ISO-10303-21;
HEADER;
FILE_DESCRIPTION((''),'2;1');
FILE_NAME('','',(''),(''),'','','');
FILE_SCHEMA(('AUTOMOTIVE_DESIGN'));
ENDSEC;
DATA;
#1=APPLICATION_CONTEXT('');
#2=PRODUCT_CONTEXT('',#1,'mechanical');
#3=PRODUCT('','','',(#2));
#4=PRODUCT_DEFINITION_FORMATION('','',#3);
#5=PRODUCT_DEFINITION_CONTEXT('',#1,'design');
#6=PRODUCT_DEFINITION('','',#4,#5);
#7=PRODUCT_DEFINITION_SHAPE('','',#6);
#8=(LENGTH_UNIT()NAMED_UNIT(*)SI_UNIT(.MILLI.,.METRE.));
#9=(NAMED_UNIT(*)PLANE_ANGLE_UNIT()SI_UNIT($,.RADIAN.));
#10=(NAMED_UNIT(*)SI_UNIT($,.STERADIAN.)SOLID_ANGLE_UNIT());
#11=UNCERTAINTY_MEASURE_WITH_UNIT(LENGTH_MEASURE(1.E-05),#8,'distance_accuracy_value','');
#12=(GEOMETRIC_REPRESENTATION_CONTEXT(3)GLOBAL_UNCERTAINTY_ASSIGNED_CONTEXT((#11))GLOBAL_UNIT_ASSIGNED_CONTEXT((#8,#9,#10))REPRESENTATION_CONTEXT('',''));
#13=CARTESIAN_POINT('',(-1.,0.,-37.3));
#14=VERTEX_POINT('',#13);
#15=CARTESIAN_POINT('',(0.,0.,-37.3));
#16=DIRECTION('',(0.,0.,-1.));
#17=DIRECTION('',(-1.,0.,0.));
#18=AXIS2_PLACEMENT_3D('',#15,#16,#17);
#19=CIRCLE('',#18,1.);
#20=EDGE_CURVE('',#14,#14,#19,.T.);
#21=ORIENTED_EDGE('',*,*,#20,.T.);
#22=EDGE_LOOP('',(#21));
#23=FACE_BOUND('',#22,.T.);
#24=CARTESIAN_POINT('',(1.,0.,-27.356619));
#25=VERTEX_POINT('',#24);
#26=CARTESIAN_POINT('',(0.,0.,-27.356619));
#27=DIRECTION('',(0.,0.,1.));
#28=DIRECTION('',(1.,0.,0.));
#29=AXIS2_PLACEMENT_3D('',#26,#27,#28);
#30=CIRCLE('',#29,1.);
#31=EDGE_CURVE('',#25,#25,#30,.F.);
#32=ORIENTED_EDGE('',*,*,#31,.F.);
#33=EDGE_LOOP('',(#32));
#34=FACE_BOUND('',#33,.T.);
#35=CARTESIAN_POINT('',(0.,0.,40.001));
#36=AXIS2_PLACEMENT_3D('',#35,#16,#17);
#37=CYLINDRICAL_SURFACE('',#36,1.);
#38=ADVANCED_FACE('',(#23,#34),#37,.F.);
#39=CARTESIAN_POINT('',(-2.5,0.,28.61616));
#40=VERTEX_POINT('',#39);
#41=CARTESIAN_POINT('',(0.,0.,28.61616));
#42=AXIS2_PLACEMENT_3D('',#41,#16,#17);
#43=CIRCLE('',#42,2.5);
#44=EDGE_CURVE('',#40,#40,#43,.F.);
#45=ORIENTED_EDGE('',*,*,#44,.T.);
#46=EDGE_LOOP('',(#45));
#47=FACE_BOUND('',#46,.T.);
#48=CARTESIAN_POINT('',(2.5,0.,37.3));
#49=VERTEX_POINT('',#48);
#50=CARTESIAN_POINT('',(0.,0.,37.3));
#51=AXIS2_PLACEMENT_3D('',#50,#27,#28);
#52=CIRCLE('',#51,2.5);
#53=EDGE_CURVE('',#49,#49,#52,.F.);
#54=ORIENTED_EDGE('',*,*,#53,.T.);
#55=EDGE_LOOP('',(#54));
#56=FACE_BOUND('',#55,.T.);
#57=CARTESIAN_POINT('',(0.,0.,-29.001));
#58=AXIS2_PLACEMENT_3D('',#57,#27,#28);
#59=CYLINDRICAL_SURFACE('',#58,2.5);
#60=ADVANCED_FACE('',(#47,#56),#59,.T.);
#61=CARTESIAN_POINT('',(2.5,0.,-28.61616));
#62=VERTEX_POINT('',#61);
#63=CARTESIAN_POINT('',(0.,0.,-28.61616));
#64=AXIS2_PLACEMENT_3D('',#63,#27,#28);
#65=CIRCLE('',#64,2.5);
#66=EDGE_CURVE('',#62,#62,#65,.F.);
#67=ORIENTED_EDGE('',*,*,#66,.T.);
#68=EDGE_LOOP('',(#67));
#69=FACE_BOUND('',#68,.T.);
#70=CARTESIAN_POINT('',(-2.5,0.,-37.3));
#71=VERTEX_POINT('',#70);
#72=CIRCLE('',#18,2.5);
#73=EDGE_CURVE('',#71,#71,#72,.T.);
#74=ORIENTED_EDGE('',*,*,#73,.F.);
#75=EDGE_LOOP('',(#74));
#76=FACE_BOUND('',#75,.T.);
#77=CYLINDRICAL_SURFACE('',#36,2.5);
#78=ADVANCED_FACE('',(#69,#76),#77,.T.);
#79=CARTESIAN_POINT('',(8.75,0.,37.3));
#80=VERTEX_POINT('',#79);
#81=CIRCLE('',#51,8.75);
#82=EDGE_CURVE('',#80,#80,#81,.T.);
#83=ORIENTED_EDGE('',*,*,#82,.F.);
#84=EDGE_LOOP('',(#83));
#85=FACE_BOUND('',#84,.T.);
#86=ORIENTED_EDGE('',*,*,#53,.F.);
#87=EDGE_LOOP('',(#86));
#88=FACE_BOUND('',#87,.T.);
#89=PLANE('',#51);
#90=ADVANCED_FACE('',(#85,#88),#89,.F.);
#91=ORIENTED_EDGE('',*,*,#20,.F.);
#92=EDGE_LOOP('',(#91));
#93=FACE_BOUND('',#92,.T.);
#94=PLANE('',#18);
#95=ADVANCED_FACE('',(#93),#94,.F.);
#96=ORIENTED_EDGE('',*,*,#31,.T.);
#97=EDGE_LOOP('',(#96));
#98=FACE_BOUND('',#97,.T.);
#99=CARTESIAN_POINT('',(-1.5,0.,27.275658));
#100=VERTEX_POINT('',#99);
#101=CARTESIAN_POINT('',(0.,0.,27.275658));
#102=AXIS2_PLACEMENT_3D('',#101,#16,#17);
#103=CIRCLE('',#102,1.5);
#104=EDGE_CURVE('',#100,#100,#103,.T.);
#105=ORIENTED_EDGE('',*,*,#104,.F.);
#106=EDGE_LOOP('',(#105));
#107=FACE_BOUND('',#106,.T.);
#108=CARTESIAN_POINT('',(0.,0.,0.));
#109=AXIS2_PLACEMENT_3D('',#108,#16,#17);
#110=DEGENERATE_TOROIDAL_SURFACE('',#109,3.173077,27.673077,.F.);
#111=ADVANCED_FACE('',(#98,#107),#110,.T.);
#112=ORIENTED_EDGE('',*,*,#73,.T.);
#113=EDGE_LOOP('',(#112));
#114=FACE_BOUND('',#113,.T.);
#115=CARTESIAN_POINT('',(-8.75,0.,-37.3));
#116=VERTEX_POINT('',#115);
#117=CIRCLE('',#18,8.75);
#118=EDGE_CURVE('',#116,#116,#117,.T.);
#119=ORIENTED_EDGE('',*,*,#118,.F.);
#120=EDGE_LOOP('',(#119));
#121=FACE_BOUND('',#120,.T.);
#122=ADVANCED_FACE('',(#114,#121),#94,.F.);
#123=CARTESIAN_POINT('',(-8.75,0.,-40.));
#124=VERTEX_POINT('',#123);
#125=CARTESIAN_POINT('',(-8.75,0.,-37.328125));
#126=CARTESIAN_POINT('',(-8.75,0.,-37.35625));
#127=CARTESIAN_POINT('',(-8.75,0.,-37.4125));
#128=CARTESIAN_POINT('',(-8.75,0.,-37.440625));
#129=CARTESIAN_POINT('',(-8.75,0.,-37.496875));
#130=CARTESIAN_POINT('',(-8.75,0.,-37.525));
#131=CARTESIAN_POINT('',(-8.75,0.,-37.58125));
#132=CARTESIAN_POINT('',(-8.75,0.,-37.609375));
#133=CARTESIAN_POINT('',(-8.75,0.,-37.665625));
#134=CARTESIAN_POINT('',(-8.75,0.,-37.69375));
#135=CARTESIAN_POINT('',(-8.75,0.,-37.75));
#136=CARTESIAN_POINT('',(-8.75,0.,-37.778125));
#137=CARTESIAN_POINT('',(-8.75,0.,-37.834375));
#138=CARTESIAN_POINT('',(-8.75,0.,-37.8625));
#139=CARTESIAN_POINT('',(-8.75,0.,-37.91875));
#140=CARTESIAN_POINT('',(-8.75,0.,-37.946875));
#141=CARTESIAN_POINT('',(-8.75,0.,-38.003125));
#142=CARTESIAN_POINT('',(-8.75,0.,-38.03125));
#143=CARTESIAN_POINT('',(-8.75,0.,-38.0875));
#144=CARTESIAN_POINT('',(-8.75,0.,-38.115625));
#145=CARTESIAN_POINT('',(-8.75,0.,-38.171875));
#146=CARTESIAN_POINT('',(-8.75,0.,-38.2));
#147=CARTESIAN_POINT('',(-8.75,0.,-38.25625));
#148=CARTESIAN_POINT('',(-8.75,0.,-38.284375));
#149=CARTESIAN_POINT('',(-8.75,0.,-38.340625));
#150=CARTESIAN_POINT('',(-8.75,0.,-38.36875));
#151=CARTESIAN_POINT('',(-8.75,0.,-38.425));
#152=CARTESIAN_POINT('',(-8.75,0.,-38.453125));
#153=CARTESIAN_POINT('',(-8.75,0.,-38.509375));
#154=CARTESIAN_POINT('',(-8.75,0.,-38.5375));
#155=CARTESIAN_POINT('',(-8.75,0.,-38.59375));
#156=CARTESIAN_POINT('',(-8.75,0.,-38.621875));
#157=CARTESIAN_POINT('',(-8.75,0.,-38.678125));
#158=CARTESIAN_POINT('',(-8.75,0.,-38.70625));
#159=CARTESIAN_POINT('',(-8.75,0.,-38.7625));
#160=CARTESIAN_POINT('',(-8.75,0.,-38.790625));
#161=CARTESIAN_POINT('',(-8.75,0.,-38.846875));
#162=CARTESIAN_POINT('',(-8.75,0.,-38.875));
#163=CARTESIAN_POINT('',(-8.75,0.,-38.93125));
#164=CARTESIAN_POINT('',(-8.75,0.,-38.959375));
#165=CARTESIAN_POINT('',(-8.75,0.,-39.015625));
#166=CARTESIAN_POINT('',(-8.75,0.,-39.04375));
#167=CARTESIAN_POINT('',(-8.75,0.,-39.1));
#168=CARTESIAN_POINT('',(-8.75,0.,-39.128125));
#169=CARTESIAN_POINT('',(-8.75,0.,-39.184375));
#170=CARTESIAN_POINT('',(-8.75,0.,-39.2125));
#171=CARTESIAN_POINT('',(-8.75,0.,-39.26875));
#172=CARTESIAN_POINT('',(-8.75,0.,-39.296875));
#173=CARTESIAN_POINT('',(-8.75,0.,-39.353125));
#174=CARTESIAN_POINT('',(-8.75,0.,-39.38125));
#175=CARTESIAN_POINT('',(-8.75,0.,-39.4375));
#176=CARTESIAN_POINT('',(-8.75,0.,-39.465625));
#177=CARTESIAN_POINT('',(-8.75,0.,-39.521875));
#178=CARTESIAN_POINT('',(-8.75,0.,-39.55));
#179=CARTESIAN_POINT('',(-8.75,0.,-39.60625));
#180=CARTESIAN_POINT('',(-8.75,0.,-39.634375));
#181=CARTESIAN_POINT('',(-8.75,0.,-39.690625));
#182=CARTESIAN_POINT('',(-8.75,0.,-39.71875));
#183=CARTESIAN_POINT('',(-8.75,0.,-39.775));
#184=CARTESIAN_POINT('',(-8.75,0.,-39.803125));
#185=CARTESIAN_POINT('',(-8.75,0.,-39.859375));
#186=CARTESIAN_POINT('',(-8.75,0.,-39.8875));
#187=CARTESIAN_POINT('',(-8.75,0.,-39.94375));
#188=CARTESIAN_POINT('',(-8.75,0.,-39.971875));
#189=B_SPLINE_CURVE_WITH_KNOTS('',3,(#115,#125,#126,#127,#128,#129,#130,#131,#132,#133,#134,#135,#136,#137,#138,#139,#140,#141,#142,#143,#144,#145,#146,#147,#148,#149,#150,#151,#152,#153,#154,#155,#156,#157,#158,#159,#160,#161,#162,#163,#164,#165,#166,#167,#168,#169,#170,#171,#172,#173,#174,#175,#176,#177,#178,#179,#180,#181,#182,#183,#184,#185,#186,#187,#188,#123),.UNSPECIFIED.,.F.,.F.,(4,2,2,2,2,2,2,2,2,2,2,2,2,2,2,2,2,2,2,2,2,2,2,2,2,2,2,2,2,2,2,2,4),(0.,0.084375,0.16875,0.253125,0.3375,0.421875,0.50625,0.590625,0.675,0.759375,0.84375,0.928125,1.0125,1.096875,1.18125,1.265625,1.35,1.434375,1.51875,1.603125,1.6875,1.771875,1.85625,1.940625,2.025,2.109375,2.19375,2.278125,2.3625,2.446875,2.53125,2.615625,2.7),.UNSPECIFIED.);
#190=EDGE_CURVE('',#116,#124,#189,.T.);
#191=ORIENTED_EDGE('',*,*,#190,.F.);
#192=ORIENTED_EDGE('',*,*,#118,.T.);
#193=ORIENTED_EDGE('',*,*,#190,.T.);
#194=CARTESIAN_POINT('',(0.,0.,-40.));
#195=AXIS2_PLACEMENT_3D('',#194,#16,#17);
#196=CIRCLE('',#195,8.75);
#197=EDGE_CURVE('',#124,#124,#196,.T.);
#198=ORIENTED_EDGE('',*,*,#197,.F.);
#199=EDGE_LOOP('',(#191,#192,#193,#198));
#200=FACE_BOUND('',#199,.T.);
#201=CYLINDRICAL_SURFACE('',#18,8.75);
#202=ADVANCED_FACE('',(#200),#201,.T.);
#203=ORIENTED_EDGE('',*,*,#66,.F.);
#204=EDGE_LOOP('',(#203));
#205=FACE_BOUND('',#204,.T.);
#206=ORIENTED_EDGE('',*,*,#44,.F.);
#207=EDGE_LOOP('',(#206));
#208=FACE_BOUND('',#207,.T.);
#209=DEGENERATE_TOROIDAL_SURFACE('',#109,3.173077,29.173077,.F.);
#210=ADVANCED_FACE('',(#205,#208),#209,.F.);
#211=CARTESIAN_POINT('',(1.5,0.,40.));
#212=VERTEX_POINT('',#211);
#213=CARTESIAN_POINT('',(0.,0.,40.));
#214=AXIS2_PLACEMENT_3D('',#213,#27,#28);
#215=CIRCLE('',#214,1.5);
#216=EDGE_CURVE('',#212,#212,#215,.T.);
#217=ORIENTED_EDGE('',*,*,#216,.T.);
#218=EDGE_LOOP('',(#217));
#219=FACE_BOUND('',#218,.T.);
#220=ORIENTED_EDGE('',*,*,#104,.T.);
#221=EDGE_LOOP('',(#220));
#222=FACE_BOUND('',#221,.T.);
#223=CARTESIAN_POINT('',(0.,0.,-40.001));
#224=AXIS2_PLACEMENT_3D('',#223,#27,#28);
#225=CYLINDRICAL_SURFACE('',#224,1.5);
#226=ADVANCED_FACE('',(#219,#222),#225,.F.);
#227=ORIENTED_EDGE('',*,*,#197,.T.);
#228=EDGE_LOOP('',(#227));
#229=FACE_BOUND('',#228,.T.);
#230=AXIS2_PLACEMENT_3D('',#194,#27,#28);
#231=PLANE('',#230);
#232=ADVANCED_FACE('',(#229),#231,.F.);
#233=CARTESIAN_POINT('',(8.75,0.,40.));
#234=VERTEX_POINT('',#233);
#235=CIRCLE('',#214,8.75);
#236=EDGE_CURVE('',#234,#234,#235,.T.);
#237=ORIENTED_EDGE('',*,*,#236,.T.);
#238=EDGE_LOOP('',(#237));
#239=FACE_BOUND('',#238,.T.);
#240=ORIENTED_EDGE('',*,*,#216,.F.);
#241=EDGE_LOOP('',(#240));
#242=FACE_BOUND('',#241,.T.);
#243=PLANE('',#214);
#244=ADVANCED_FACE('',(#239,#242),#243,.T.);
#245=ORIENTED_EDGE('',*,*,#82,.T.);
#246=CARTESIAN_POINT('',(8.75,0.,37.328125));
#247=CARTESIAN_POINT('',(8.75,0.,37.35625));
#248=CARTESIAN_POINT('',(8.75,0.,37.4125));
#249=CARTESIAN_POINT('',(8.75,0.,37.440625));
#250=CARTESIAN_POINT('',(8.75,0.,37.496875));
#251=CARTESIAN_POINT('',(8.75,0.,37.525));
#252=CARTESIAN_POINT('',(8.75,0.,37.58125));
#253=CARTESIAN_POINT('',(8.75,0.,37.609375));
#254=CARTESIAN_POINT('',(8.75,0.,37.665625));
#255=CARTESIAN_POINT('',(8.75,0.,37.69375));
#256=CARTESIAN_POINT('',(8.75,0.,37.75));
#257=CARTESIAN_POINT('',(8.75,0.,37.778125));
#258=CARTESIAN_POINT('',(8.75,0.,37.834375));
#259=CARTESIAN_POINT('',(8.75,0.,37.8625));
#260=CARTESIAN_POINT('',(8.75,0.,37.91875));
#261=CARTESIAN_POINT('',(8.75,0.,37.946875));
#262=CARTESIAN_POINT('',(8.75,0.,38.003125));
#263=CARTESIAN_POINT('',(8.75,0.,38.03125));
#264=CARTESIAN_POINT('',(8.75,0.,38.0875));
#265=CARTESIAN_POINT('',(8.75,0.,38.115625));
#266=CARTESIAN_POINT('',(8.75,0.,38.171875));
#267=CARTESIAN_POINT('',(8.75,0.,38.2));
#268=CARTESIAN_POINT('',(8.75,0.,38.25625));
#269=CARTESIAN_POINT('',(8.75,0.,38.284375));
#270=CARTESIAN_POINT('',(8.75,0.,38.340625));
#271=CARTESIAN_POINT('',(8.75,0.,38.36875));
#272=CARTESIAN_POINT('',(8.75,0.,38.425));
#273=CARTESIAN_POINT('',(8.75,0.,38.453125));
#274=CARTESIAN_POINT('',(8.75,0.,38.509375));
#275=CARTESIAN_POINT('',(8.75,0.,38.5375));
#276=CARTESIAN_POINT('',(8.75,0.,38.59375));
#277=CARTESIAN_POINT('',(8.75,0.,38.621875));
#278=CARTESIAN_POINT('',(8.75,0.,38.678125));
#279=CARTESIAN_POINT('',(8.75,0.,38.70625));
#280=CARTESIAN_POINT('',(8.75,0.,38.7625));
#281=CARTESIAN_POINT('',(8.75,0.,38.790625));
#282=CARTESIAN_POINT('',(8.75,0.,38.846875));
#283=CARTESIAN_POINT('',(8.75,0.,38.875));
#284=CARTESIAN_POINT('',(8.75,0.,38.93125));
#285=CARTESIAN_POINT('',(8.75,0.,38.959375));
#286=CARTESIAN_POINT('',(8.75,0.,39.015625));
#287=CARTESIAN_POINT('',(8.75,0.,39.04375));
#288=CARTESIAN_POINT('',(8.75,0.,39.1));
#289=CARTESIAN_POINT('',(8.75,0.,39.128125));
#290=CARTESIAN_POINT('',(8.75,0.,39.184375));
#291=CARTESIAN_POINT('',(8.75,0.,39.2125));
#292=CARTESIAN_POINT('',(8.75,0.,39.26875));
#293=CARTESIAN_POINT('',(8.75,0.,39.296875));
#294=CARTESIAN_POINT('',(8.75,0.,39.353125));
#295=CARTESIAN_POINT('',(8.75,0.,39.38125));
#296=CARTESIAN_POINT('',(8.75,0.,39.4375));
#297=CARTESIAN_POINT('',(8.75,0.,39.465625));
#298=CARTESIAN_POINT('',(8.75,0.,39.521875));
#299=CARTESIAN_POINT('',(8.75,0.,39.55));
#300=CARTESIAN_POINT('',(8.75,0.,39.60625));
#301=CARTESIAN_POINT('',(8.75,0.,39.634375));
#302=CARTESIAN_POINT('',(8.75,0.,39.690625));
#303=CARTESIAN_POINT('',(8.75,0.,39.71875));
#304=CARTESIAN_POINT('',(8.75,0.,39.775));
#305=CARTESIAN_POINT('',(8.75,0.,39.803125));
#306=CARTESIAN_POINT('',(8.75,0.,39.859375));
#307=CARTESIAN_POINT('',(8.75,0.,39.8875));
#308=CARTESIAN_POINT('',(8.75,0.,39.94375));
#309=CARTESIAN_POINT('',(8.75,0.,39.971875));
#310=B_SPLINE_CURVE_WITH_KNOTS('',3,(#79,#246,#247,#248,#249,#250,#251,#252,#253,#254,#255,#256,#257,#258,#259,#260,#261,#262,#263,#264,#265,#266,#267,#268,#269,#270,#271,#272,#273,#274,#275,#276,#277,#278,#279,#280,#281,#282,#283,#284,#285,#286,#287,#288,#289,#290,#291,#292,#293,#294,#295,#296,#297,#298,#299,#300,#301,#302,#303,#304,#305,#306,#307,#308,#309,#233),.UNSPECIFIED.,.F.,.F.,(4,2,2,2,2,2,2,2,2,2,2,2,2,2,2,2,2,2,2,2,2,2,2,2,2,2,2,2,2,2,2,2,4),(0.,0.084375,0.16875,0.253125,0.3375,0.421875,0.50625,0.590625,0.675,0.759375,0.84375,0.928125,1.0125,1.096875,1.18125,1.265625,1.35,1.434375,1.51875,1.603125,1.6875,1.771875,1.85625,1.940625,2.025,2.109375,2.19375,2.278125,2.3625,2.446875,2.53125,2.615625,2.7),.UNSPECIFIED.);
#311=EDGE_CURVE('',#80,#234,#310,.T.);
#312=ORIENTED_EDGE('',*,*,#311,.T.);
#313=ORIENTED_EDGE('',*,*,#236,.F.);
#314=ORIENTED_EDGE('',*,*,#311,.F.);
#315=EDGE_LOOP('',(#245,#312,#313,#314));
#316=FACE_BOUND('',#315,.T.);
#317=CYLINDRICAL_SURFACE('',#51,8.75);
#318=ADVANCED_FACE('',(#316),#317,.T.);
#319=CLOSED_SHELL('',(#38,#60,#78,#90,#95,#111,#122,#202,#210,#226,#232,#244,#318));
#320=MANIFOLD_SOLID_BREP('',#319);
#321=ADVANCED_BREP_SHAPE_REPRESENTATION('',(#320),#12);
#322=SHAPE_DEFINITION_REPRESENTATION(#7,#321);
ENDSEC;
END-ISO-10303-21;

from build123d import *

# Parameters (mm, degrees)
BOSS_EXTRUDE1_REACH = 80.186
SKETCH3_R           = 2.5
BOSS_EXTRUDE2_REACH = 90.045
SKETCH4_R           = 2.5
SKETCH5_R           = 8.75
BOSS_EXTRUDE3_DEPTH = 2.7
BOSS_EXTRUDE4_START = -2.7
SKETCH6_R           = 8.75
BOSS_EXTRUDE4_DEPTH = 2.7
CUT_EXTRUDE1_REACH  = 90.045
SKETCH7_R           = 1.5


# Read off the part's stored shape, not the designer's step: Shell2
with BuildPart() as part:
    # Sketch1 → Revolve1 (revolve)
    with BuildSketch(Plane(origin=(0, 0, 0), x_dir=(1, 0, 0), z_dir=(0, 1, 0))):
        with BuildLine():
            Line((0, 29), (0, -29))
            ThreePointArc((0, -29), (-26, 0), (0, 29))
        make_face()
    revolve(axis=Axis((0, 0, -29), (0, 0, 1)))

    # Sketch3 → Boss-Extrude1 (add, up to next)
    with BuildSketch(Plane.XY.offset(40), mode=Mode.PRIVATE) as boss_extrude1_sk1:
        Circle(SKETCH3_R)
    boss_extrude1_tool1 = extrude(boss_extrude1_sk1.sketch, amount=-BOSS_EXTRUDE1_REACH, mode=Mode.PRIVATE) - part.part
    add(boss_extrude1_tool1.solids().sort_by_distance((0, 0, 40))[0])

    # Sketch4 → Boss-Extrude2 (add, up to next)
    with BuildSketch(Plane.XY.offset(-40), mode=Mode.PRIVATE) as boss_extrude2_sk1:
        Circle(SKETCH4_R)
    boss_extrude2_tool1 = extrude(boss_extrude2_sk1.sketch, amount=BOSS_EXTRUDE2_REACH, mode=Mode.PRIVATE) - part.part
    add(boss_extrude2_tool1.solids().sort_by_distance((0, 0, -40))[0])

    # Shell2 outline → Shell2 (revolve, cut)
    with BuildSketch(Plane.XZ):
        with BuildLine():
            Line((1, 27.356619224), (1, 40))
            Line((1, 40), (0, 40))
            Line((0, 40), (0, -38.5))
            Line((0, -38.5), (1, -38.5))
            Line((1, -38.5), (1, -27.356619224))
            ThreePointArc((1, -27.356619224), (24.5, 0), (1, 27.356619224))
        make_face()
    revolve(axis=Axis((0, 0, 0), (0, 0, 1)), mode=Mode.SUBTRACT)

    # Sketch5 → Boss-Extrude3 (add)
    with BuildSketch(Plane.XY.offset(40)):
        Circle(SKETCH5_R)
    extrude(amount=-BOSS_EXTRUDE3_DEPTH)

    # Sketch6 → Boss-Extrude4 (add)
    with BuildSketch(Plane(origin=(0, 0, -40), x_dir=(-1, 0, 0), z_dir=(0, 0, -1)).offset(BOSS_EXTRUDE4_START)):
        with Locations(Location((0, 0, 0), (0, 0, 180))):
            Circle(SKETCH6_R)
    extrude(amount=BOSS_EXTRUDE4_DEPTH)

    # Sketch7 → Cut-Extrude1 (cut, up to next)
    with BuildSketch(Plane.XY.offset(40), mode=Mode.PRIVATE) as cut_extrude1_sk1:
        Circle(SKETCH7_R)
    cut_extrude1_tool1 = extrude(cut_extrude1_sk1.sketch, amount=-CUT_EXTRUDE1_REACH, mode=Mode.PRIVATE) & part.part
    add(cut_extrude1_tool1.solids().sort_by_distance((0, 0, 40))[0], mode=Mode.SUBTRACT)


solid = part.part
